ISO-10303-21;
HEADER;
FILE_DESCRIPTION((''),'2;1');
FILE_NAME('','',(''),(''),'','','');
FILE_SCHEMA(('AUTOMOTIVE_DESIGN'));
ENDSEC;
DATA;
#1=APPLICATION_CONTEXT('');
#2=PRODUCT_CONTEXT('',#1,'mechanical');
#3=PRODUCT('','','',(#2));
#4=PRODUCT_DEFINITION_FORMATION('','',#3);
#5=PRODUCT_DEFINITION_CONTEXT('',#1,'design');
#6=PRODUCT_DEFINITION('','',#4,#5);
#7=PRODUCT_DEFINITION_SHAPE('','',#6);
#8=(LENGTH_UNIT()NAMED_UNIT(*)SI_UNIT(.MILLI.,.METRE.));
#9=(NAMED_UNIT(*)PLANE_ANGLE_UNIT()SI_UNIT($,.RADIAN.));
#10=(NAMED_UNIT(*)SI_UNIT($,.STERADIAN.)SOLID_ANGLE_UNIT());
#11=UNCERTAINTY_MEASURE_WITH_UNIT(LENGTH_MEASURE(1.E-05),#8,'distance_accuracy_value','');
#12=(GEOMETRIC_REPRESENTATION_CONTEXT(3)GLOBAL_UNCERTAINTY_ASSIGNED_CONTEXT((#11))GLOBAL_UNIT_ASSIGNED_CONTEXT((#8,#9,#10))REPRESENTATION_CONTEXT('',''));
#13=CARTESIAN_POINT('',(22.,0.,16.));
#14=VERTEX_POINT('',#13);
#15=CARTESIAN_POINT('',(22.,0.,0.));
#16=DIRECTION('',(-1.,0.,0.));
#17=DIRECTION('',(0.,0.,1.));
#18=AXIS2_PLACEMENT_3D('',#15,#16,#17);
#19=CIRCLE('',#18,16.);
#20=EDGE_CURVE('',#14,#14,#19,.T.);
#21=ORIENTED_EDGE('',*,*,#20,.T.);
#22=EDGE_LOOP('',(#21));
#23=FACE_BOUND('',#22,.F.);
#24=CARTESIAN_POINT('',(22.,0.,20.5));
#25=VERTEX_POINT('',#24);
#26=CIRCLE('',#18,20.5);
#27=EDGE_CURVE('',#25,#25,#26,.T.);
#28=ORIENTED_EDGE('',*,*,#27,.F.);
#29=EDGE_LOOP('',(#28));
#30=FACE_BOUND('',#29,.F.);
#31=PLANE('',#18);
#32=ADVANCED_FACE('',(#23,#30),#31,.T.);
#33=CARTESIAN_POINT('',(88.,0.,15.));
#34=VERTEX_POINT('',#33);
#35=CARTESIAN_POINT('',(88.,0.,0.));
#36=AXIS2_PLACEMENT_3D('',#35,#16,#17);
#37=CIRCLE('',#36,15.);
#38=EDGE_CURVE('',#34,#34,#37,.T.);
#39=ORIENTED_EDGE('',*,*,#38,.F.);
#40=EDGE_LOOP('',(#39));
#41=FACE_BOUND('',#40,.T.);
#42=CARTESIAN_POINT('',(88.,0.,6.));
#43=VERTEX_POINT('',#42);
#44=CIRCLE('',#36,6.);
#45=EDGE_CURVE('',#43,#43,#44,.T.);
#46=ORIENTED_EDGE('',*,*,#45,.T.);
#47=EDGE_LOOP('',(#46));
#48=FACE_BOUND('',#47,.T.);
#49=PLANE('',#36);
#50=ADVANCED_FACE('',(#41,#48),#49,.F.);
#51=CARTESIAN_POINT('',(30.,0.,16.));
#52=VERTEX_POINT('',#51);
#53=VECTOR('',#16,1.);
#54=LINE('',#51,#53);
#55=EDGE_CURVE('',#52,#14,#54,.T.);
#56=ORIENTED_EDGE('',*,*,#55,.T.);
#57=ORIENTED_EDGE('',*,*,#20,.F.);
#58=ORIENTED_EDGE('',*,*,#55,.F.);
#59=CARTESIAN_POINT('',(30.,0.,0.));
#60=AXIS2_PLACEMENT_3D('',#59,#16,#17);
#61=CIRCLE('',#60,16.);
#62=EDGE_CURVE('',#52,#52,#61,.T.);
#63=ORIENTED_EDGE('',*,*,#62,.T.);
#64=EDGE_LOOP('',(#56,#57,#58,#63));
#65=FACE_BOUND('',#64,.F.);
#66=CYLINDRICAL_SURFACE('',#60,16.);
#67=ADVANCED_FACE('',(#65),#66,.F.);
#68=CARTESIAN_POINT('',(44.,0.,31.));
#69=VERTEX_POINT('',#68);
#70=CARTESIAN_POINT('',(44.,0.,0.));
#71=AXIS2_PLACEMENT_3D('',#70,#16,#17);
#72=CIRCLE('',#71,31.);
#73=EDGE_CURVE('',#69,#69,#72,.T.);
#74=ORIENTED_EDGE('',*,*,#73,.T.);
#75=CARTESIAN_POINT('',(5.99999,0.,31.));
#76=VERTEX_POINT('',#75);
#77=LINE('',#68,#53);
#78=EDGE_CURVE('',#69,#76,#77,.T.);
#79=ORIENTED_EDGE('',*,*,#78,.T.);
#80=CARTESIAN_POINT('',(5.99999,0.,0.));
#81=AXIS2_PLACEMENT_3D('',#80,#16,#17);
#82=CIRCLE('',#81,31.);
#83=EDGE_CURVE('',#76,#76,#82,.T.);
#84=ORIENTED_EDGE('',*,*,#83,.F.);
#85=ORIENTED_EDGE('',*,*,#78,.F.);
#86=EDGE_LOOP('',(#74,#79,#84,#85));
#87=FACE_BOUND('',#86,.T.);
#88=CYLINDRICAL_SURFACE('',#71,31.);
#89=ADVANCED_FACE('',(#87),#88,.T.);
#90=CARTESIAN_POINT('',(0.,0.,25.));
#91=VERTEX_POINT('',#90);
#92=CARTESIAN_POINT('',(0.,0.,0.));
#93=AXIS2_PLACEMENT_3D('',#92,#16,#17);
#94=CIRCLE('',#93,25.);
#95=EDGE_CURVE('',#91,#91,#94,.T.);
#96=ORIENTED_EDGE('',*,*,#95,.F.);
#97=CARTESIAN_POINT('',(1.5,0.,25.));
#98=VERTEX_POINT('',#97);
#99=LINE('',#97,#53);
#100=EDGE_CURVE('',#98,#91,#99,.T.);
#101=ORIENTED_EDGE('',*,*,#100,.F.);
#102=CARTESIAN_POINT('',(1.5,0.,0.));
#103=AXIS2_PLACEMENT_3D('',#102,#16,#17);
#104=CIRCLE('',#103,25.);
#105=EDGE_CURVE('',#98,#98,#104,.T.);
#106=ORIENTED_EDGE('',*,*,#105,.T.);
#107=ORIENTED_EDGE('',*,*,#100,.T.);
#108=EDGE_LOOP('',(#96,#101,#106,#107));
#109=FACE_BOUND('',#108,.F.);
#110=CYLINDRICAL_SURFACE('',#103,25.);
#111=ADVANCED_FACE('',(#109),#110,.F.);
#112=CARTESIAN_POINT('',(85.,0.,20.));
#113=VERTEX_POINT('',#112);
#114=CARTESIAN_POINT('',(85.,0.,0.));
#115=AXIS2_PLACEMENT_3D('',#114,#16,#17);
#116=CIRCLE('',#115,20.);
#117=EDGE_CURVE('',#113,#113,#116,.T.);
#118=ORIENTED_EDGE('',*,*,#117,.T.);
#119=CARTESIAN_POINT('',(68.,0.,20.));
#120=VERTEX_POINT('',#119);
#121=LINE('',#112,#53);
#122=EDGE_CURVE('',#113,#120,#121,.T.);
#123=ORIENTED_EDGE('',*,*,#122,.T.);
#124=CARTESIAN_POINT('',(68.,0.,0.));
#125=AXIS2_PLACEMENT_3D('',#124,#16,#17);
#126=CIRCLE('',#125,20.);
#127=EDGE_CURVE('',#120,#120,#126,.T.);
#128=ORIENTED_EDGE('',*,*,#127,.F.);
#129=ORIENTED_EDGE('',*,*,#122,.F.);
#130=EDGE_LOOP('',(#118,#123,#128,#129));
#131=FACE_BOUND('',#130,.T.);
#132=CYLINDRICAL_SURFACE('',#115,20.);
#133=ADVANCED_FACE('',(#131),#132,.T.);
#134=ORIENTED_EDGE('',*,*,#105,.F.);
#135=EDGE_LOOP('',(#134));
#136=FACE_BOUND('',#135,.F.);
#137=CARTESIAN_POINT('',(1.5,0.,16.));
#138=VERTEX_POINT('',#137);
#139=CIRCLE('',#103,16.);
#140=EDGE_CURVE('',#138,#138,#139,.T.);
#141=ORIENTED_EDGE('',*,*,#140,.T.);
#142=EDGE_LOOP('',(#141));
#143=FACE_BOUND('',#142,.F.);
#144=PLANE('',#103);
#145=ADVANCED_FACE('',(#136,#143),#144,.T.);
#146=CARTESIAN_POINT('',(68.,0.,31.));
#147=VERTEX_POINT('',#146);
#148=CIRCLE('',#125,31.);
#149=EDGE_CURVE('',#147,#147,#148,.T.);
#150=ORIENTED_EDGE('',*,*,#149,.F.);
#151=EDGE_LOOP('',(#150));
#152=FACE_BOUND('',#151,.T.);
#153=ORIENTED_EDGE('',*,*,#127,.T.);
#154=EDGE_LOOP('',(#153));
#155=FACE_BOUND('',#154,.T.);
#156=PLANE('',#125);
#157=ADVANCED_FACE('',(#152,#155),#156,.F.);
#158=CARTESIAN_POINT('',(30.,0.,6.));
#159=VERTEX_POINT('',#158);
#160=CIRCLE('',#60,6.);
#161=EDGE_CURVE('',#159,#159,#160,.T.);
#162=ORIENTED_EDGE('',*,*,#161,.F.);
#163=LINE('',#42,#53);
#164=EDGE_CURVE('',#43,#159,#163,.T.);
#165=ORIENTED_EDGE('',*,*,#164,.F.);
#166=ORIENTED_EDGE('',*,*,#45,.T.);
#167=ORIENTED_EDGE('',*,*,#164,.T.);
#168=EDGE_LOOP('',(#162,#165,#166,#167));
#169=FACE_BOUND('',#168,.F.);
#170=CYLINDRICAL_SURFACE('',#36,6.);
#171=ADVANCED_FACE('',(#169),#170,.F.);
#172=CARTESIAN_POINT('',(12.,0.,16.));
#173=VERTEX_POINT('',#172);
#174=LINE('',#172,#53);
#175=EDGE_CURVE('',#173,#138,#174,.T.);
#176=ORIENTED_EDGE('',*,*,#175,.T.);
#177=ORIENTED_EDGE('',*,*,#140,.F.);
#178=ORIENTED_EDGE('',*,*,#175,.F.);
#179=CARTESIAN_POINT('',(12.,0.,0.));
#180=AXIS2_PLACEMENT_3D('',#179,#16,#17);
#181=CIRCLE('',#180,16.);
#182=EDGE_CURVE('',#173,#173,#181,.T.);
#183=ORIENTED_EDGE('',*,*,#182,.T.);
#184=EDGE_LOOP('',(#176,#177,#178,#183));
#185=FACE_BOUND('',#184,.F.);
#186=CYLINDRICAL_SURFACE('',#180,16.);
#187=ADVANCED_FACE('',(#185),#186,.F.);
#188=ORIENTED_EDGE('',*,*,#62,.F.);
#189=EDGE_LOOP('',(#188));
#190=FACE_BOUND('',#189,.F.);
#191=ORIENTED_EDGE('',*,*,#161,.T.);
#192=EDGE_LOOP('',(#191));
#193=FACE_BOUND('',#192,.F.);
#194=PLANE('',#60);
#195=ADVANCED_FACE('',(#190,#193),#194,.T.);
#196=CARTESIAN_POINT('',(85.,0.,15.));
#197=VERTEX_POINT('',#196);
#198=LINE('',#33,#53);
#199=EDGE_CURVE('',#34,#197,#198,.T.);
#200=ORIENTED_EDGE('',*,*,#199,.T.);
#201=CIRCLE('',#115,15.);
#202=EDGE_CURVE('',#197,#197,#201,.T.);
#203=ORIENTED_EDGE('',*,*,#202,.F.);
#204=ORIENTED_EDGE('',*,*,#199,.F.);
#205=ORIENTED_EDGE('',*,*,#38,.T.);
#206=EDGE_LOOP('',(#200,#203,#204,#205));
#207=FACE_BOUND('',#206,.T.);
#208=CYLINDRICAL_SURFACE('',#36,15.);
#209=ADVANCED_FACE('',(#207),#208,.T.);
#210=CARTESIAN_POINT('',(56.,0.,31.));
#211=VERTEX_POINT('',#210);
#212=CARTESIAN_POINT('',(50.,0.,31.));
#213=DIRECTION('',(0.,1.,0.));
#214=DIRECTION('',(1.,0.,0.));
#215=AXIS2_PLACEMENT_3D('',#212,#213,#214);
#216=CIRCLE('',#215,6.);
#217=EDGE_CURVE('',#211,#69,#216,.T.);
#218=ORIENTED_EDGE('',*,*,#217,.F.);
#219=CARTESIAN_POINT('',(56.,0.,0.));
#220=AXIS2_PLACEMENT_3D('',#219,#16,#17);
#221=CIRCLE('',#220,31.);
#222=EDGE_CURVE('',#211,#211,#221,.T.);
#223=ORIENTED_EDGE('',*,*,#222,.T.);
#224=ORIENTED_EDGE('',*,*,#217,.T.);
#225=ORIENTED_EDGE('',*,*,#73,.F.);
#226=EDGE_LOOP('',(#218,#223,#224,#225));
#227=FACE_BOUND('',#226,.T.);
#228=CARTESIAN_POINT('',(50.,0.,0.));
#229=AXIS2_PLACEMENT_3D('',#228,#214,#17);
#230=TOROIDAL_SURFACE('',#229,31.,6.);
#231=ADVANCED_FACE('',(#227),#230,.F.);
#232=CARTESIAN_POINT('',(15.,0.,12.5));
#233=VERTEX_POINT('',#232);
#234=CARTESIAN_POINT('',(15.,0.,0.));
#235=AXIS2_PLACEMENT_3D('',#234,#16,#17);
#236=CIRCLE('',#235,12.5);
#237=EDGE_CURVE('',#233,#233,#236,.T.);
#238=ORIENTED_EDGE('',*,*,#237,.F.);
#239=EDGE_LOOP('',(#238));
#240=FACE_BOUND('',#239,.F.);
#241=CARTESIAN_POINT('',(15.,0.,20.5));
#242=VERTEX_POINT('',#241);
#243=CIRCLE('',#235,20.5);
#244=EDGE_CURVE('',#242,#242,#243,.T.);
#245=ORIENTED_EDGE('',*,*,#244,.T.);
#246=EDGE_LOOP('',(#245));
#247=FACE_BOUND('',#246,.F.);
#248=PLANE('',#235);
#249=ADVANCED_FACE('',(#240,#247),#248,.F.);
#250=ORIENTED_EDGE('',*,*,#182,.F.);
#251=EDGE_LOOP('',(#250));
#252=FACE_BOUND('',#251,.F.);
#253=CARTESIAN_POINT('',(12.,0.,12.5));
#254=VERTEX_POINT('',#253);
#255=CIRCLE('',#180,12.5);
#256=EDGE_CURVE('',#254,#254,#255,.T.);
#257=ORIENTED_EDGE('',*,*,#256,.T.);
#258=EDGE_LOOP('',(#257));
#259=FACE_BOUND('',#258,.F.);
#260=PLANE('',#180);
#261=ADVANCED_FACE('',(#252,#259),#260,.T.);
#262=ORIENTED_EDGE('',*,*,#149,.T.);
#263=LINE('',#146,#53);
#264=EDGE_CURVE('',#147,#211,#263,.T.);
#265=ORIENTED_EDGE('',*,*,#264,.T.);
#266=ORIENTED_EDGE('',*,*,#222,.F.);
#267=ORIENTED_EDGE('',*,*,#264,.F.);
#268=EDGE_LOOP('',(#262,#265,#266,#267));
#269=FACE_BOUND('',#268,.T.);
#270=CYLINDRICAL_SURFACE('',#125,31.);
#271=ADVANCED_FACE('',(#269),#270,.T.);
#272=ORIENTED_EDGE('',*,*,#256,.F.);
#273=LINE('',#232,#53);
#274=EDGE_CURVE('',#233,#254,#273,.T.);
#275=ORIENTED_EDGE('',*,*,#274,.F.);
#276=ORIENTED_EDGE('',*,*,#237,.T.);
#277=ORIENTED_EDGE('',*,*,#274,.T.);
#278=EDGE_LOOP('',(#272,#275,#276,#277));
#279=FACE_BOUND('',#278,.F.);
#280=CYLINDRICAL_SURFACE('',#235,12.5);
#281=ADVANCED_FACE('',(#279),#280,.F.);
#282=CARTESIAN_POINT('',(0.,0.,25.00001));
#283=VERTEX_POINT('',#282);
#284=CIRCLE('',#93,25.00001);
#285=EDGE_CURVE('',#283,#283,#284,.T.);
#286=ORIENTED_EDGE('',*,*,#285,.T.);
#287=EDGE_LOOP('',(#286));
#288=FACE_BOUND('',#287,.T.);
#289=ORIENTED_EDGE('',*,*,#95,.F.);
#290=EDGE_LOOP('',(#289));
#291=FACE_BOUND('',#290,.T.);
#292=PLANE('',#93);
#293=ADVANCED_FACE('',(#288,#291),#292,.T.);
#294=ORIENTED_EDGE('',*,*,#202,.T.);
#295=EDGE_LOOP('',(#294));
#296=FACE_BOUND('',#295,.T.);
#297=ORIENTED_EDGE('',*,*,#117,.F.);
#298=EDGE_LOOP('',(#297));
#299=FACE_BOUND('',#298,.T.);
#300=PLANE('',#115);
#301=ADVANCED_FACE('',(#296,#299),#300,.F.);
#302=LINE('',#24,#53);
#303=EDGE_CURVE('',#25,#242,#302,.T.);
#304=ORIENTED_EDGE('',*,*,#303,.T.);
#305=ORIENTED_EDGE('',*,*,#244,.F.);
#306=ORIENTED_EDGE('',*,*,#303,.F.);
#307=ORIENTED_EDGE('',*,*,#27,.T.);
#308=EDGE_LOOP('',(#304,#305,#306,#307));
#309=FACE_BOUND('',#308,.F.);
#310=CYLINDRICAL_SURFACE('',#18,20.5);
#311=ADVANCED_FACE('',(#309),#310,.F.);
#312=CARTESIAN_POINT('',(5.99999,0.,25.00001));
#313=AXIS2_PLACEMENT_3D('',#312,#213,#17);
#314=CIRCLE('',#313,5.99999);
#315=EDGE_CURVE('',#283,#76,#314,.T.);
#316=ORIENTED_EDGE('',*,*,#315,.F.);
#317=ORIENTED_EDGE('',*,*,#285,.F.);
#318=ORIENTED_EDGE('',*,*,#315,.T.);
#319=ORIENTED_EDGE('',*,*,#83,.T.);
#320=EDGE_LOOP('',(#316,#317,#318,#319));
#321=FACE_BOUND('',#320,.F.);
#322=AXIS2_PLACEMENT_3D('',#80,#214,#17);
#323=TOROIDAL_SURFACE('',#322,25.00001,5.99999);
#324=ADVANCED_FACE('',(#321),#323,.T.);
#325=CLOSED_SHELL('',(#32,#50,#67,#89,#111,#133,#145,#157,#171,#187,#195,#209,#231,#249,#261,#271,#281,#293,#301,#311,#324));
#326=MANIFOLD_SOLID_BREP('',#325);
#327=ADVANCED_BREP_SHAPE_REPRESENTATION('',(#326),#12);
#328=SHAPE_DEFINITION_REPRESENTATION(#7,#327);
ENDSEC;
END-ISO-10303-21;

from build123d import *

# Parameters (mm, degrees)
F4_R = 5.99999


# Not quite as in the source:
# - a fillet or chamfer is up to 0.001 mm smaller than in the source, because OpenCascade refuses the exact size


with BuildPart() as f1:
    # F0 (on Front) → F1 (revolve)
    with BuildSketch(Plane.XZ):
        with BuildLine():
            Line((0, 31), (0, 0))
            Line((0, 0), (88, 0))
            Line((88, 0), (88, 15))
            Line((88, 15), (85, 15))
            Line((85, 15), (85, 20))
            Line((85, 20), (68, 20))
            Line((68, 20), (68, 31))
            Line((68, 31), (56, 31))
            ThreePointArc((56, 31), (50, 25), (44, 31))
            Line((44, 31), (0, 31))
        make_face()
    revolve(axis=Axis((44, 0, 0), (-1, 0, 0)))

    # F2 (on Front) → F3 (revolve, cut)
    with BuildSketch(Plane.XZ):
        Polygon((1.5, 25), (0, 25), (0, 0), (88, 0), (88, 6), (30, 6), (30, 16), (22, 16), (22, 20.5), (15, 20.5), (15, 12.5), (12, 12.5), (12, 16), (1.5, 16), align=None)
    revolve(axis=Axis((-11.4788431415, 0, 0), (-1, 0, 0)), mode=Mode.SUBTRACT)

    # F4 (radius 6 in the source; OpenCascade refuses exactly that, so slightly less here)
    f4_edges = [f1.edges().sort_by_distance(p)[0] for p in [
        (0, 0, -31),
    ]]
    fillet(f4_edges, radius=F4_R)


solid = f1.part
